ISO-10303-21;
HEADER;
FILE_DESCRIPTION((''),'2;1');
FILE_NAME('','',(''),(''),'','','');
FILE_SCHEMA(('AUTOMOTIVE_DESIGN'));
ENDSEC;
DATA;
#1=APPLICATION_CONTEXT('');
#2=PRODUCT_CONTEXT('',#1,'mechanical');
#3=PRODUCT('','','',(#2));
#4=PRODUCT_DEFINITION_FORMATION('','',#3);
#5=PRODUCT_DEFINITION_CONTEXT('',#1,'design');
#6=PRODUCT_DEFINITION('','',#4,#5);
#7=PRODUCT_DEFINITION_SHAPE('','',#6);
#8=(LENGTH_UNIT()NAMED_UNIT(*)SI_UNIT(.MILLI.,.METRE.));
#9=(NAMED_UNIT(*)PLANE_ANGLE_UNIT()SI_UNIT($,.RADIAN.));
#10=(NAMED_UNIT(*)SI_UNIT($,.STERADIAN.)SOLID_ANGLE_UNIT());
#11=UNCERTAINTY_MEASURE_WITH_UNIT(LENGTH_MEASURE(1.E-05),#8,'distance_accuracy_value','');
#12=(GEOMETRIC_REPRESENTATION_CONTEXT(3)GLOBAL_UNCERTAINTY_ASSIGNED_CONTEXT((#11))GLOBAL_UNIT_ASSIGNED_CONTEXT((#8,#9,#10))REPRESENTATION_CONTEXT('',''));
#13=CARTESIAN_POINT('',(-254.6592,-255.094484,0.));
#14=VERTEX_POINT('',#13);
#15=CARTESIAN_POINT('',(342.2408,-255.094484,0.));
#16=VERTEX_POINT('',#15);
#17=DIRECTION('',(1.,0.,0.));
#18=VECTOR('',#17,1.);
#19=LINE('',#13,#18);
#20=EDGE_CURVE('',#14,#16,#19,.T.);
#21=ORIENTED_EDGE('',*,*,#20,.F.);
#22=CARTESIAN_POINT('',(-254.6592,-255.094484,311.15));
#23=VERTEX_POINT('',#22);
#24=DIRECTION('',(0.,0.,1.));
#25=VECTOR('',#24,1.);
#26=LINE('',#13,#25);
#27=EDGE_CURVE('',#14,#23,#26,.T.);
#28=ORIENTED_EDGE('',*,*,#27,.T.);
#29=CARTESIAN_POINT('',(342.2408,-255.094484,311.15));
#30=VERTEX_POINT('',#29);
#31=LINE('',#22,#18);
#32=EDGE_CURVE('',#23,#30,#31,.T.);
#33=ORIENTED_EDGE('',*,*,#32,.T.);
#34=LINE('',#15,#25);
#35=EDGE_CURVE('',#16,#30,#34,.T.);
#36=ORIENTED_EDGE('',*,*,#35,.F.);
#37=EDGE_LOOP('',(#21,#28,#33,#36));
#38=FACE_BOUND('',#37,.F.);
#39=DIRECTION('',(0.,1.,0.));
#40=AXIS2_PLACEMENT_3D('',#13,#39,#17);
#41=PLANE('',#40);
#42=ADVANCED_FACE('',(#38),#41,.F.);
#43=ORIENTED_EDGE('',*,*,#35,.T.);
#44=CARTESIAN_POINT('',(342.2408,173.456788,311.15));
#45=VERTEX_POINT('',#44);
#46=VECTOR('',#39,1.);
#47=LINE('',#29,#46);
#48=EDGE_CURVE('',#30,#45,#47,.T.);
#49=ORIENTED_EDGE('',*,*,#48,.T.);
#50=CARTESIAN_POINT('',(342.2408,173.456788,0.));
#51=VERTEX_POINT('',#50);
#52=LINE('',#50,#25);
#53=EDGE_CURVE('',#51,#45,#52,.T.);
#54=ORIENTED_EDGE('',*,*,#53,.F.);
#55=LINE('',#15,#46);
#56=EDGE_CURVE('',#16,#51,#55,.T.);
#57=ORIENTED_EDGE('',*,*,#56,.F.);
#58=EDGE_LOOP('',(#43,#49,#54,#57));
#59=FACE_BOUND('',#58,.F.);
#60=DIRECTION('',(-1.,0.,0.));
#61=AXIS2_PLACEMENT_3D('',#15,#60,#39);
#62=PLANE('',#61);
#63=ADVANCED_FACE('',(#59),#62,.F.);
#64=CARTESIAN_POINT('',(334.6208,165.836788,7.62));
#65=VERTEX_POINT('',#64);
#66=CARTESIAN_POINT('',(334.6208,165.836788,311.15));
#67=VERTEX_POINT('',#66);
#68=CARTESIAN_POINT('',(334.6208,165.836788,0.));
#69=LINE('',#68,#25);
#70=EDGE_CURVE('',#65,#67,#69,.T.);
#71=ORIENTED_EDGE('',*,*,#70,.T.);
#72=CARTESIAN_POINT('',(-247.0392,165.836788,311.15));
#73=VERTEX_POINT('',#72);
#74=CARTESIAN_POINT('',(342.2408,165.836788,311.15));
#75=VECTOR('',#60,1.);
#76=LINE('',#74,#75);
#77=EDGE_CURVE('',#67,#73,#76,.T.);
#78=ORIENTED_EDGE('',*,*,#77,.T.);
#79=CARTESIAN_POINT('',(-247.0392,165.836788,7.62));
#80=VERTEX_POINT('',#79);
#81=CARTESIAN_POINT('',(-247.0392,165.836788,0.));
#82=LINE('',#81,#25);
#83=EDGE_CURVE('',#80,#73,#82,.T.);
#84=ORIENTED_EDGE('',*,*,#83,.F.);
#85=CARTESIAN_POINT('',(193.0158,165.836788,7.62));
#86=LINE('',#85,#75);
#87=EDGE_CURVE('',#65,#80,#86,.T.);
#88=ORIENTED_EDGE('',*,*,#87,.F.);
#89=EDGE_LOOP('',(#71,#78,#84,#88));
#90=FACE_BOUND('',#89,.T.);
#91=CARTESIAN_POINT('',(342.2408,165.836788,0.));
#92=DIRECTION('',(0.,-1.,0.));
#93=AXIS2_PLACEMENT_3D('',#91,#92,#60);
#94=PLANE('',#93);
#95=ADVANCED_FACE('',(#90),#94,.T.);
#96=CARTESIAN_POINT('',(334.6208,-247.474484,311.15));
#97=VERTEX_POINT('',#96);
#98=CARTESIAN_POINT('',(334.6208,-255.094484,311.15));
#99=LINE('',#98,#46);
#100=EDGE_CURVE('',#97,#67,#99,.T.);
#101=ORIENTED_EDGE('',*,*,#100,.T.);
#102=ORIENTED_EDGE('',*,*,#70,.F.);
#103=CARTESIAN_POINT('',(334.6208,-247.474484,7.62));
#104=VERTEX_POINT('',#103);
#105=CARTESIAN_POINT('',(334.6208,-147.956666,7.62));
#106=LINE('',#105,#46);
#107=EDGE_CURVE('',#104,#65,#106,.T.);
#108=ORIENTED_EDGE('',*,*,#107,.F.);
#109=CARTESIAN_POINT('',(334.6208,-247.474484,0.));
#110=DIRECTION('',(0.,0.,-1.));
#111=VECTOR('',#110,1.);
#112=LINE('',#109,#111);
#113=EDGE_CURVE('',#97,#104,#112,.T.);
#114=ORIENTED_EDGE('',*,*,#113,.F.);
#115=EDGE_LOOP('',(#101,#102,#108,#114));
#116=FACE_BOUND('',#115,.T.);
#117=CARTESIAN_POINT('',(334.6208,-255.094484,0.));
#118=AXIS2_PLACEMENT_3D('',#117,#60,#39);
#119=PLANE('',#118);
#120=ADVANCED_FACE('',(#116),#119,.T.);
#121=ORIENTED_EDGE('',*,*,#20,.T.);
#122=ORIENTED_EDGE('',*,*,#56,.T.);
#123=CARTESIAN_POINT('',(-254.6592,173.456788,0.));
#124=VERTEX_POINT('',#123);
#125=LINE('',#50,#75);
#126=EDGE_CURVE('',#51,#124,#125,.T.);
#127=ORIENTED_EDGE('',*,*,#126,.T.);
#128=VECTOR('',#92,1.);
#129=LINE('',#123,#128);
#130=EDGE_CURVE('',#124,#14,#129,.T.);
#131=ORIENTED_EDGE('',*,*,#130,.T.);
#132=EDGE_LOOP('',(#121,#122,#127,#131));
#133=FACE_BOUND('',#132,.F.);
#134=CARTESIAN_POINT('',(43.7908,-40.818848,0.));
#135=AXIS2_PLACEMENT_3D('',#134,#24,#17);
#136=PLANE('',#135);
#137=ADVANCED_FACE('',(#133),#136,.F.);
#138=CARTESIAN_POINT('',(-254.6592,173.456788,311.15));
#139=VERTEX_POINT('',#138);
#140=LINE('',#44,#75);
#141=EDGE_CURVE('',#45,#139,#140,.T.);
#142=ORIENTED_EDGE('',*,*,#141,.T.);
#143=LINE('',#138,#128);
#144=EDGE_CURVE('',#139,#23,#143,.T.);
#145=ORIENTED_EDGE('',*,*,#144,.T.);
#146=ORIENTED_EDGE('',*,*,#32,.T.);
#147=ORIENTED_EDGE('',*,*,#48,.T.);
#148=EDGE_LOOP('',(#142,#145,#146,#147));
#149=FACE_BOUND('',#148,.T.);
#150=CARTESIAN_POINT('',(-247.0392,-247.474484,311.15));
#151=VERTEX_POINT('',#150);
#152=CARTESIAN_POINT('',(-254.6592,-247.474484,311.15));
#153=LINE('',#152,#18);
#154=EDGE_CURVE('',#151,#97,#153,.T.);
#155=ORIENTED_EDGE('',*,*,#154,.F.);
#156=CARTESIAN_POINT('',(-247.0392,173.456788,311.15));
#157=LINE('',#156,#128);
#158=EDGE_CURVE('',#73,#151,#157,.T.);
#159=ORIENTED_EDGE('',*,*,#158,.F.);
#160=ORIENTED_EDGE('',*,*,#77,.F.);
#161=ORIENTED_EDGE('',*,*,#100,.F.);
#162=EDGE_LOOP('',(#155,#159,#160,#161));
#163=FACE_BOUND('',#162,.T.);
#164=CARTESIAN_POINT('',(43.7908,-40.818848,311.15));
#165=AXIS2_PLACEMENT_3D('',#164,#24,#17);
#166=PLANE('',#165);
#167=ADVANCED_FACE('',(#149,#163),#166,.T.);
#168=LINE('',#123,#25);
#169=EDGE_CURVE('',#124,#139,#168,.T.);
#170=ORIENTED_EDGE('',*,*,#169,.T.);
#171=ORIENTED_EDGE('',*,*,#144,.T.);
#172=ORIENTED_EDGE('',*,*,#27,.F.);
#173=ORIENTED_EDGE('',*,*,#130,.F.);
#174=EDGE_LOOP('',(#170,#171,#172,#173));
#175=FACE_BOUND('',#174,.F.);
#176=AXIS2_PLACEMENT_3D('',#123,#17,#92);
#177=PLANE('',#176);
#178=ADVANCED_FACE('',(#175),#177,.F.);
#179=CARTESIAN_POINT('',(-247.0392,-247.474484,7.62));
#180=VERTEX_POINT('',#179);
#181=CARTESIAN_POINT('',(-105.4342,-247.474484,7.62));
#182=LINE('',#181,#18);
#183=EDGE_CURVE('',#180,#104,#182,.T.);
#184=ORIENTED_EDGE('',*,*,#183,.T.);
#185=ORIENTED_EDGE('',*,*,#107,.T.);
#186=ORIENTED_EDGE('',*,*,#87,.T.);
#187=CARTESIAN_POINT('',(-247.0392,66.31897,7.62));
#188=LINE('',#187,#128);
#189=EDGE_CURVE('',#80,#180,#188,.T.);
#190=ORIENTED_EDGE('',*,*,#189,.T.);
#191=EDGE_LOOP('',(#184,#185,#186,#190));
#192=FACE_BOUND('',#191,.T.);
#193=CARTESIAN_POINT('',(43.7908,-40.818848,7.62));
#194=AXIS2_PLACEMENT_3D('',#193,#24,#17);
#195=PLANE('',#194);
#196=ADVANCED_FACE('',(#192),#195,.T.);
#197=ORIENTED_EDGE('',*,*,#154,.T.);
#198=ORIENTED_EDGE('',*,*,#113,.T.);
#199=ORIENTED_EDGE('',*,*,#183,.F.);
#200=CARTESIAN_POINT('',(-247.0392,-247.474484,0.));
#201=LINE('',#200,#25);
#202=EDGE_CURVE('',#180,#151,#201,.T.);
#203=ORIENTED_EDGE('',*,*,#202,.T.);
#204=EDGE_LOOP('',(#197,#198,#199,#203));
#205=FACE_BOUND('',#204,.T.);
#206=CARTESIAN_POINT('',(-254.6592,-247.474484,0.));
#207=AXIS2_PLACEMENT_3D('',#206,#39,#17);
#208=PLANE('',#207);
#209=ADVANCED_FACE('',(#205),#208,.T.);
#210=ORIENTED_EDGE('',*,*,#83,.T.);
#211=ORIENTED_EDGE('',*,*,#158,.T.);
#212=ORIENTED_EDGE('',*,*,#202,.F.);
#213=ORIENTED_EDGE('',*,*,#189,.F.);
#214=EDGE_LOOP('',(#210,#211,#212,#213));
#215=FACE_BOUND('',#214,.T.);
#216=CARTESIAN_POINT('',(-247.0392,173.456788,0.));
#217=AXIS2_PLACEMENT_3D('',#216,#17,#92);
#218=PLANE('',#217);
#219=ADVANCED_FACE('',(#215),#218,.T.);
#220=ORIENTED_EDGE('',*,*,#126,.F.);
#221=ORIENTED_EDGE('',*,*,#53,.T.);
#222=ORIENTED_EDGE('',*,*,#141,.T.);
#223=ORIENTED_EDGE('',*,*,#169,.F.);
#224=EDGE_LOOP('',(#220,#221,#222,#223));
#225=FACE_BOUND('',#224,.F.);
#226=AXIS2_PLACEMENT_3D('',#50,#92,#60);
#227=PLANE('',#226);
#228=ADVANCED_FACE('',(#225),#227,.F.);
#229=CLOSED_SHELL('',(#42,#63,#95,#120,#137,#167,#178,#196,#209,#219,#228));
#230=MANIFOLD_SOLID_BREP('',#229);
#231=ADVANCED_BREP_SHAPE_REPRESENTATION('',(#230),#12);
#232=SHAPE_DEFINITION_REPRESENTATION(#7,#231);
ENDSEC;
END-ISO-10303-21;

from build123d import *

# Parameters (mm, degrees)
F1_DEPTH = 311.15
F2_T     = -7.62


# Not quite as in the source:
# - a feature names something its author has since deleted; it is built from what else it names


with BuildPart() as f1:
    # F0 (on Top) → F1 (new body)
    with BuildSketch(Plane.XY):
        Polygon((342.2408003828, -255.094484383), (342.2408003828, 173.456788063), (-254.6591996172, 173.456788063), (-254.6591996172, -197.8495568037), (-254.6591996172, -255.094484383), (334.2911142349, -255.094484383), align=None)
    extrude(amount=F1_DEPTH)

    # F2
    f2_openings = [f1.faces().sort_by_distance(p)[0] for p in [
        (43.7908, -40.818848, 311.15),
    ]]
    offset(amount=F2_T, openings=f2_openings)


solid = f1.part
